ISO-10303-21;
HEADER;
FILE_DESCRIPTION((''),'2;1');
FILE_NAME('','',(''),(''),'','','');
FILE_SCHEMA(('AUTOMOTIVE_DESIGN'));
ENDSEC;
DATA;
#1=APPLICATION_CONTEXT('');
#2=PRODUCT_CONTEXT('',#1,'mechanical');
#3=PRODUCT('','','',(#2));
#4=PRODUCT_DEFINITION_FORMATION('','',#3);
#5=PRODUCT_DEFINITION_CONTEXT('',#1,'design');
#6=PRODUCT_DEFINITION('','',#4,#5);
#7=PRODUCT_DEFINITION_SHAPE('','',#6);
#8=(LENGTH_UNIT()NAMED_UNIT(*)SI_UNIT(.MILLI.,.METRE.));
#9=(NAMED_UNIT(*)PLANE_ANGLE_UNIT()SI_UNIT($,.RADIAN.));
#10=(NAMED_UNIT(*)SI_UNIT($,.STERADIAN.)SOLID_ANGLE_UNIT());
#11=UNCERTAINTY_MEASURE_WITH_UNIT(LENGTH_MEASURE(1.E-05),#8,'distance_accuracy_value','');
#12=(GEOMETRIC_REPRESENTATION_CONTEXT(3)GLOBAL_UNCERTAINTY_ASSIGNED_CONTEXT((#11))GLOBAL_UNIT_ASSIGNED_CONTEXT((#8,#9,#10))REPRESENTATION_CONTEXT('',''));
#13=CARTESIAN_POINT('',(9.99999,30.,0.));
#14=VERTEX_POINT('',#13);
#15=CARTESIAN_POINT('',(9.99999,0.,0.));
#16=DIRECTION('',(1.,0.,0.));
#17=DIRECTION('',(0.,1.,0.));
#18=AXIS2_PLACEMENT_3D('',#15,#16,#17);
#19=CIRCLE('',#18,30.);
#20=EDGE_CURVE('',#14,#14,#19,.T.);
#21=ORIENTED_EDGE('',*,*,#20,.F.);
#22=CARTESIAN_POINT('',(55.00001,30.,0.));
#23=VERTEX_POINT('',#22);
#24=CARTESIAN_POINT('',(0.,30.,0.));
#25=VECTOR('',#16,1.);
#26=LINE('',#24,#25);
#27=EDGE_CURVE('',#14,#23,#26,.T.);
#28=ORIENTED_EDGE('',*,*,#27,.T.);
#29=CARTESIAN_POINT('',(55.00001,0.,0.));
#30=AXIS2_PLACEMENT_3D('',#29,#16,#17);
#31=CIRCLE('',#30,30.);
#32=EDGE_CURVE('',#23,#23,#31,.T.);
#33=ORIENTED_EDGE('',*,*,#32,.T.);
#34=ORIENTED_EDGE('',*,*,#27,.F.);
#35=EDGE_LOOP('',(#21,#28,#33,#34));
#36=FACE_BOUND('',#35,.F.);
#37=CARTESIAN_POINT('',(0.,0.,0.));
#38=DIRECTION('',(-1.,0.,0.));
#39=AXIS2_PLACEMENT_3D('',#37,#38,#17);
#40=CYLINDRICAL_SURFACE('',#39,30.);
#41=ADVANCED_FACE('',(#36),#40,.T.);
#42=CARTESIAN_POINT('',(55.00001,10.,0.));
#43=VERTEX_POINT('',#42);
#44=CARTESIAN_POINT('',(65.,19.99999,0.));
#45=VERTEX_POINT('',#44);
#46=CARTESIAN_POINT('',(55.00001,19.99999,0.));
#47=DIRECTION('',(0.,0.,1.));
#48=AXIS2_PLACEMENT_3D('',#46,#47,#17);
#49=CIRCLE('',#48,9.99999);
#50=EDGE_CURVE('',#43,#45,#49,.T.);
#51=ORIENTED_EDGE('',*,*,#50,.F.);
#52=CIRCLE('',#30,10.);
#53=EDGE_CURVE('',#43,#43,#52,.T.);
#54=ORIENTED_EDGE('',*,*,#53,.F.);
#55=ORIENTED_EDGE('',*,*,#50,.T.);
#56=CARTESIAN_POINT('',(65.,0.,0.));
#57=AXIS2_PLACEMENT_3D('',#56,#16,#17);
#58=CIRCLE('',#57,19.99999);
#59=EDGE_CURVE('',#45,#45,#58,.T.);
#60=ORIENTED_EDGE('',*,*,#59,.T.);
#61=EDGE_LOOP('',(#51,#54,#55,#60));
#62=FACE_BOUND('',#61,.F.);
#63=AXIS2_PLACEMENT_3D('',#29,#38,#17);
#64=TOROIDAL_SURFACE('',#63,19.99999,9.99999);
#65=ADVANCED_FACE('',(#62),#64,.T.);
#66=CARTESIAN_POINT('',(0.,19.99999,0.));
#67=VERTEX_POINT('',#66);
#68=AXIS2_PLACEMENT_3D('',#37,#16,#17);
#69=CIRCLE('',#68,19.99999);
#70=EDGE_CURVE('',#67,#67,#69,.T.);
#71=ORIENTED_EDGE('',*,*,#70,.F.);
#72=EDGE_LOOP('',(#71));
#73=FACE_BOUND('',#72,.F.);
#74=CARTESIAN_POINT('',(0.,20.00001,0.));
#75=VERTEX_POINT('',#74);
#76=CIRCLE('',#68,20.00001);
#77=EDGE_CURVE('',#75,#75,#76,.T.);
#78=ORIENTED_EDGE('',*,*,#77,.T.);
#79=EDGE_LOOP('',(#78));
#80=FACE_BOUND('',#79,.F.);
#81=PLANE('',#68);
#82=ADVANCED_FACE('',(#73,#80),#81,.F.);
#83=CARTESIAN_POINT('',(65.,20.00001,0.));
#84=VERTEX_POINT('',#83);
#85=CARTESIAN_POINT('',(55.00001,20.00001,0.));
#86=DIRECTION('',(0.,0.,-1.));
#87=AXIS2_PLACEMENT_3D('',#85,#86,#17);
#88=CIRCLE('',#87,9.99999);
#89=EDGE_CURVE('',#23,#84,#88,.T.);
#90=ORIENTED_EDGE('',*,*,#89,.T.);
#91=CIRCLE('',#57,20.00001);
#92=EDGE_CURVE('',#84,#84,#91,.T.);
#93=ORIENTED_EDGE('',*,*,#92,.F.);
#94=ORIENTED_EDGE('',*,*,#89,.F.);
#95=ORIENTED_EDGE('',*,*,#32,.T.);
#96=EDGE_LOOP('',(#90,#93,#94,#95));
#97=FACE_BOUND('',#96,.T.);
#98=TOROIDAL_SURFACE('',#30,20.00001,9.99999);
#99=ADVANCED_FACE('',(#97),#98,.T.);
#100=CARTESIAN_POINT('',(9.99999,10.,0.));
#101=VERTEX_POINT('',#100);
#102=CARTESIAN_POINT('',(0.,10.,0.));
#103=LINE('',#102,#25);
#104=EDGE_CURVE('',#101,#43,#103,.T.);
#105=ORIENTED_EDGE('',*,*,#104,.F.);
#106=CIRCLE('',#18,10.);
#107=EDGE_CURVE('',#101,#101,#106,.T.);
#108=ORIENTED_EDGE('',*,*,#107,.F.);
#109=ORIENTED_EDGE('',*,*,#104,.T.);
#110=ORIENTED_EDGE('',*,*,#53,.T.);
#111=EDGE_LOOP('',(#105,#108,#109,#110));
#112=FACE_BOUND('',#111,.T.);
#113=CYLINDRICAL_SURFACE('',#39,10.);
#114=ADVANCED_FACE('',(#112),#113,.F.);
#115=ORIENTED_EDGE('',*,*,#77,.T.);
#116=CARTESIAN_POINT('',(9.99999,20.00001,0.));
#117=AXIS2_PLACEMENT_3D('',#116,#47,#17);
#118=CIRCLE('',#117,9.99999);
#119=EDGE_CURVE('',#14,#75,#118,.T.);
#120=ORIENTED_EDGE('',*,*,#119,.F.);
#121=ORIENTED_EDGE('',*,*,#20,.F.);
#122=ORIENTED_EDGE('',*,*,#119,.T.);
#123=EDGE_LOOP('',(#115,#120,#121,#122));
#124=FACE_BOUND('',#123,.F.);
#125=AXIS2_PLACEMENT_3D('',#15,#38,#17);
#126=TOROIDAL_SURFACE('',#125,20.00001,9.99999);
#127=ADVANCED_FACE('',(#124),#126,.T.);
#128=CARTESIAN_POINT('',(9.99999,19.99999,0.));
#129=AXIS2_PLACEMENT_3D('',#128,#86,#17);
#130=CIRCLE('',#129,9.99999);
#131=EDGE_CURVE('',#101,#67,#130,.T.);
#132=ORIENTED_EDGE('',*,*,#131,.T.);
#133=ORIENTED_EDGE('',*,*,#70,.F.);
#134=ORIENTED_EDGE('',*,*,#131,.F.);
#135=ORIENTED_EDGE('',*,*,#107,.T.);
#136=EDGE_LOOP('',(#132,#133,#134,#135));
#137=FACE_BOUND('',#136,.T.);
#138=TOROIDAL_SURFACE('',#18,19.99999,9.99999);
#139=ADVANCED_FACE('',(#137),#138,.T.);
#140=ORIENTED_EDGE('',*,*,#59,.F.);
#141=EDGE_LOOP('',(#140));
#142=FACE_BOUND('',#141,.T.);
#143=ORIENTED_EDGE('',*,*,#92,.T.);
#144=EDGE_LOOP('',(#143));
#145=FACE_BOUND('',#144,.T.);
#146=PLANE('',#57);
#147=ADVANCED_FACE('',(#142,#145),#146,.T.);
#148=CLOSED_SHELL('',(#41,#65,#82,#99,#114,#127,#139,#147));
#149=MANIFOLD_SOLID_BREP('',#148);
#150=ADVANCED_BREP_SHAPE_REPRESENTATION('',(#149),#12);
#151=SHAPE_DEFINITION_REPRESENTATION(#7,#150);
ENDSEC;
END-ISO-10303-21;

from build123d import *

# Parameters (mm, degrees)
F0_R     = 30
F0_R_2   = 10
F1_DEPTH = 65
F2_R     = 9.99999


# Not quite as in the source:
# - a fillet or chamfer is up to 0.001 mm smaller than in the source, because OpenCascade refuses the exact size


with BuildPart() as f1:
    # F0 (on Right) → F1 (new body)
    with BuildSketch(Plane.YZ):
        Circle(F0_R)
        Circle(F0_R_2, mode=Mode.SUBTRACT)
    extrude(amount=F1_DEPTH)

    # F2 (radius 10 in the source; OpenCascade refuses exactly that, so slightly less here)
    f2_edges = [f1.edges().sort_by_distance(p)[0] for p in [
        (65, -30, 0),
        (65, -10, 0),
        (32.5, 30, 0),
        (0, -30, 0),
        (0, -10, 0),
        (32.5, 10, 0),
    ]]
    fillet(f2_edges, radius=F2_R)


solid = f1.part
